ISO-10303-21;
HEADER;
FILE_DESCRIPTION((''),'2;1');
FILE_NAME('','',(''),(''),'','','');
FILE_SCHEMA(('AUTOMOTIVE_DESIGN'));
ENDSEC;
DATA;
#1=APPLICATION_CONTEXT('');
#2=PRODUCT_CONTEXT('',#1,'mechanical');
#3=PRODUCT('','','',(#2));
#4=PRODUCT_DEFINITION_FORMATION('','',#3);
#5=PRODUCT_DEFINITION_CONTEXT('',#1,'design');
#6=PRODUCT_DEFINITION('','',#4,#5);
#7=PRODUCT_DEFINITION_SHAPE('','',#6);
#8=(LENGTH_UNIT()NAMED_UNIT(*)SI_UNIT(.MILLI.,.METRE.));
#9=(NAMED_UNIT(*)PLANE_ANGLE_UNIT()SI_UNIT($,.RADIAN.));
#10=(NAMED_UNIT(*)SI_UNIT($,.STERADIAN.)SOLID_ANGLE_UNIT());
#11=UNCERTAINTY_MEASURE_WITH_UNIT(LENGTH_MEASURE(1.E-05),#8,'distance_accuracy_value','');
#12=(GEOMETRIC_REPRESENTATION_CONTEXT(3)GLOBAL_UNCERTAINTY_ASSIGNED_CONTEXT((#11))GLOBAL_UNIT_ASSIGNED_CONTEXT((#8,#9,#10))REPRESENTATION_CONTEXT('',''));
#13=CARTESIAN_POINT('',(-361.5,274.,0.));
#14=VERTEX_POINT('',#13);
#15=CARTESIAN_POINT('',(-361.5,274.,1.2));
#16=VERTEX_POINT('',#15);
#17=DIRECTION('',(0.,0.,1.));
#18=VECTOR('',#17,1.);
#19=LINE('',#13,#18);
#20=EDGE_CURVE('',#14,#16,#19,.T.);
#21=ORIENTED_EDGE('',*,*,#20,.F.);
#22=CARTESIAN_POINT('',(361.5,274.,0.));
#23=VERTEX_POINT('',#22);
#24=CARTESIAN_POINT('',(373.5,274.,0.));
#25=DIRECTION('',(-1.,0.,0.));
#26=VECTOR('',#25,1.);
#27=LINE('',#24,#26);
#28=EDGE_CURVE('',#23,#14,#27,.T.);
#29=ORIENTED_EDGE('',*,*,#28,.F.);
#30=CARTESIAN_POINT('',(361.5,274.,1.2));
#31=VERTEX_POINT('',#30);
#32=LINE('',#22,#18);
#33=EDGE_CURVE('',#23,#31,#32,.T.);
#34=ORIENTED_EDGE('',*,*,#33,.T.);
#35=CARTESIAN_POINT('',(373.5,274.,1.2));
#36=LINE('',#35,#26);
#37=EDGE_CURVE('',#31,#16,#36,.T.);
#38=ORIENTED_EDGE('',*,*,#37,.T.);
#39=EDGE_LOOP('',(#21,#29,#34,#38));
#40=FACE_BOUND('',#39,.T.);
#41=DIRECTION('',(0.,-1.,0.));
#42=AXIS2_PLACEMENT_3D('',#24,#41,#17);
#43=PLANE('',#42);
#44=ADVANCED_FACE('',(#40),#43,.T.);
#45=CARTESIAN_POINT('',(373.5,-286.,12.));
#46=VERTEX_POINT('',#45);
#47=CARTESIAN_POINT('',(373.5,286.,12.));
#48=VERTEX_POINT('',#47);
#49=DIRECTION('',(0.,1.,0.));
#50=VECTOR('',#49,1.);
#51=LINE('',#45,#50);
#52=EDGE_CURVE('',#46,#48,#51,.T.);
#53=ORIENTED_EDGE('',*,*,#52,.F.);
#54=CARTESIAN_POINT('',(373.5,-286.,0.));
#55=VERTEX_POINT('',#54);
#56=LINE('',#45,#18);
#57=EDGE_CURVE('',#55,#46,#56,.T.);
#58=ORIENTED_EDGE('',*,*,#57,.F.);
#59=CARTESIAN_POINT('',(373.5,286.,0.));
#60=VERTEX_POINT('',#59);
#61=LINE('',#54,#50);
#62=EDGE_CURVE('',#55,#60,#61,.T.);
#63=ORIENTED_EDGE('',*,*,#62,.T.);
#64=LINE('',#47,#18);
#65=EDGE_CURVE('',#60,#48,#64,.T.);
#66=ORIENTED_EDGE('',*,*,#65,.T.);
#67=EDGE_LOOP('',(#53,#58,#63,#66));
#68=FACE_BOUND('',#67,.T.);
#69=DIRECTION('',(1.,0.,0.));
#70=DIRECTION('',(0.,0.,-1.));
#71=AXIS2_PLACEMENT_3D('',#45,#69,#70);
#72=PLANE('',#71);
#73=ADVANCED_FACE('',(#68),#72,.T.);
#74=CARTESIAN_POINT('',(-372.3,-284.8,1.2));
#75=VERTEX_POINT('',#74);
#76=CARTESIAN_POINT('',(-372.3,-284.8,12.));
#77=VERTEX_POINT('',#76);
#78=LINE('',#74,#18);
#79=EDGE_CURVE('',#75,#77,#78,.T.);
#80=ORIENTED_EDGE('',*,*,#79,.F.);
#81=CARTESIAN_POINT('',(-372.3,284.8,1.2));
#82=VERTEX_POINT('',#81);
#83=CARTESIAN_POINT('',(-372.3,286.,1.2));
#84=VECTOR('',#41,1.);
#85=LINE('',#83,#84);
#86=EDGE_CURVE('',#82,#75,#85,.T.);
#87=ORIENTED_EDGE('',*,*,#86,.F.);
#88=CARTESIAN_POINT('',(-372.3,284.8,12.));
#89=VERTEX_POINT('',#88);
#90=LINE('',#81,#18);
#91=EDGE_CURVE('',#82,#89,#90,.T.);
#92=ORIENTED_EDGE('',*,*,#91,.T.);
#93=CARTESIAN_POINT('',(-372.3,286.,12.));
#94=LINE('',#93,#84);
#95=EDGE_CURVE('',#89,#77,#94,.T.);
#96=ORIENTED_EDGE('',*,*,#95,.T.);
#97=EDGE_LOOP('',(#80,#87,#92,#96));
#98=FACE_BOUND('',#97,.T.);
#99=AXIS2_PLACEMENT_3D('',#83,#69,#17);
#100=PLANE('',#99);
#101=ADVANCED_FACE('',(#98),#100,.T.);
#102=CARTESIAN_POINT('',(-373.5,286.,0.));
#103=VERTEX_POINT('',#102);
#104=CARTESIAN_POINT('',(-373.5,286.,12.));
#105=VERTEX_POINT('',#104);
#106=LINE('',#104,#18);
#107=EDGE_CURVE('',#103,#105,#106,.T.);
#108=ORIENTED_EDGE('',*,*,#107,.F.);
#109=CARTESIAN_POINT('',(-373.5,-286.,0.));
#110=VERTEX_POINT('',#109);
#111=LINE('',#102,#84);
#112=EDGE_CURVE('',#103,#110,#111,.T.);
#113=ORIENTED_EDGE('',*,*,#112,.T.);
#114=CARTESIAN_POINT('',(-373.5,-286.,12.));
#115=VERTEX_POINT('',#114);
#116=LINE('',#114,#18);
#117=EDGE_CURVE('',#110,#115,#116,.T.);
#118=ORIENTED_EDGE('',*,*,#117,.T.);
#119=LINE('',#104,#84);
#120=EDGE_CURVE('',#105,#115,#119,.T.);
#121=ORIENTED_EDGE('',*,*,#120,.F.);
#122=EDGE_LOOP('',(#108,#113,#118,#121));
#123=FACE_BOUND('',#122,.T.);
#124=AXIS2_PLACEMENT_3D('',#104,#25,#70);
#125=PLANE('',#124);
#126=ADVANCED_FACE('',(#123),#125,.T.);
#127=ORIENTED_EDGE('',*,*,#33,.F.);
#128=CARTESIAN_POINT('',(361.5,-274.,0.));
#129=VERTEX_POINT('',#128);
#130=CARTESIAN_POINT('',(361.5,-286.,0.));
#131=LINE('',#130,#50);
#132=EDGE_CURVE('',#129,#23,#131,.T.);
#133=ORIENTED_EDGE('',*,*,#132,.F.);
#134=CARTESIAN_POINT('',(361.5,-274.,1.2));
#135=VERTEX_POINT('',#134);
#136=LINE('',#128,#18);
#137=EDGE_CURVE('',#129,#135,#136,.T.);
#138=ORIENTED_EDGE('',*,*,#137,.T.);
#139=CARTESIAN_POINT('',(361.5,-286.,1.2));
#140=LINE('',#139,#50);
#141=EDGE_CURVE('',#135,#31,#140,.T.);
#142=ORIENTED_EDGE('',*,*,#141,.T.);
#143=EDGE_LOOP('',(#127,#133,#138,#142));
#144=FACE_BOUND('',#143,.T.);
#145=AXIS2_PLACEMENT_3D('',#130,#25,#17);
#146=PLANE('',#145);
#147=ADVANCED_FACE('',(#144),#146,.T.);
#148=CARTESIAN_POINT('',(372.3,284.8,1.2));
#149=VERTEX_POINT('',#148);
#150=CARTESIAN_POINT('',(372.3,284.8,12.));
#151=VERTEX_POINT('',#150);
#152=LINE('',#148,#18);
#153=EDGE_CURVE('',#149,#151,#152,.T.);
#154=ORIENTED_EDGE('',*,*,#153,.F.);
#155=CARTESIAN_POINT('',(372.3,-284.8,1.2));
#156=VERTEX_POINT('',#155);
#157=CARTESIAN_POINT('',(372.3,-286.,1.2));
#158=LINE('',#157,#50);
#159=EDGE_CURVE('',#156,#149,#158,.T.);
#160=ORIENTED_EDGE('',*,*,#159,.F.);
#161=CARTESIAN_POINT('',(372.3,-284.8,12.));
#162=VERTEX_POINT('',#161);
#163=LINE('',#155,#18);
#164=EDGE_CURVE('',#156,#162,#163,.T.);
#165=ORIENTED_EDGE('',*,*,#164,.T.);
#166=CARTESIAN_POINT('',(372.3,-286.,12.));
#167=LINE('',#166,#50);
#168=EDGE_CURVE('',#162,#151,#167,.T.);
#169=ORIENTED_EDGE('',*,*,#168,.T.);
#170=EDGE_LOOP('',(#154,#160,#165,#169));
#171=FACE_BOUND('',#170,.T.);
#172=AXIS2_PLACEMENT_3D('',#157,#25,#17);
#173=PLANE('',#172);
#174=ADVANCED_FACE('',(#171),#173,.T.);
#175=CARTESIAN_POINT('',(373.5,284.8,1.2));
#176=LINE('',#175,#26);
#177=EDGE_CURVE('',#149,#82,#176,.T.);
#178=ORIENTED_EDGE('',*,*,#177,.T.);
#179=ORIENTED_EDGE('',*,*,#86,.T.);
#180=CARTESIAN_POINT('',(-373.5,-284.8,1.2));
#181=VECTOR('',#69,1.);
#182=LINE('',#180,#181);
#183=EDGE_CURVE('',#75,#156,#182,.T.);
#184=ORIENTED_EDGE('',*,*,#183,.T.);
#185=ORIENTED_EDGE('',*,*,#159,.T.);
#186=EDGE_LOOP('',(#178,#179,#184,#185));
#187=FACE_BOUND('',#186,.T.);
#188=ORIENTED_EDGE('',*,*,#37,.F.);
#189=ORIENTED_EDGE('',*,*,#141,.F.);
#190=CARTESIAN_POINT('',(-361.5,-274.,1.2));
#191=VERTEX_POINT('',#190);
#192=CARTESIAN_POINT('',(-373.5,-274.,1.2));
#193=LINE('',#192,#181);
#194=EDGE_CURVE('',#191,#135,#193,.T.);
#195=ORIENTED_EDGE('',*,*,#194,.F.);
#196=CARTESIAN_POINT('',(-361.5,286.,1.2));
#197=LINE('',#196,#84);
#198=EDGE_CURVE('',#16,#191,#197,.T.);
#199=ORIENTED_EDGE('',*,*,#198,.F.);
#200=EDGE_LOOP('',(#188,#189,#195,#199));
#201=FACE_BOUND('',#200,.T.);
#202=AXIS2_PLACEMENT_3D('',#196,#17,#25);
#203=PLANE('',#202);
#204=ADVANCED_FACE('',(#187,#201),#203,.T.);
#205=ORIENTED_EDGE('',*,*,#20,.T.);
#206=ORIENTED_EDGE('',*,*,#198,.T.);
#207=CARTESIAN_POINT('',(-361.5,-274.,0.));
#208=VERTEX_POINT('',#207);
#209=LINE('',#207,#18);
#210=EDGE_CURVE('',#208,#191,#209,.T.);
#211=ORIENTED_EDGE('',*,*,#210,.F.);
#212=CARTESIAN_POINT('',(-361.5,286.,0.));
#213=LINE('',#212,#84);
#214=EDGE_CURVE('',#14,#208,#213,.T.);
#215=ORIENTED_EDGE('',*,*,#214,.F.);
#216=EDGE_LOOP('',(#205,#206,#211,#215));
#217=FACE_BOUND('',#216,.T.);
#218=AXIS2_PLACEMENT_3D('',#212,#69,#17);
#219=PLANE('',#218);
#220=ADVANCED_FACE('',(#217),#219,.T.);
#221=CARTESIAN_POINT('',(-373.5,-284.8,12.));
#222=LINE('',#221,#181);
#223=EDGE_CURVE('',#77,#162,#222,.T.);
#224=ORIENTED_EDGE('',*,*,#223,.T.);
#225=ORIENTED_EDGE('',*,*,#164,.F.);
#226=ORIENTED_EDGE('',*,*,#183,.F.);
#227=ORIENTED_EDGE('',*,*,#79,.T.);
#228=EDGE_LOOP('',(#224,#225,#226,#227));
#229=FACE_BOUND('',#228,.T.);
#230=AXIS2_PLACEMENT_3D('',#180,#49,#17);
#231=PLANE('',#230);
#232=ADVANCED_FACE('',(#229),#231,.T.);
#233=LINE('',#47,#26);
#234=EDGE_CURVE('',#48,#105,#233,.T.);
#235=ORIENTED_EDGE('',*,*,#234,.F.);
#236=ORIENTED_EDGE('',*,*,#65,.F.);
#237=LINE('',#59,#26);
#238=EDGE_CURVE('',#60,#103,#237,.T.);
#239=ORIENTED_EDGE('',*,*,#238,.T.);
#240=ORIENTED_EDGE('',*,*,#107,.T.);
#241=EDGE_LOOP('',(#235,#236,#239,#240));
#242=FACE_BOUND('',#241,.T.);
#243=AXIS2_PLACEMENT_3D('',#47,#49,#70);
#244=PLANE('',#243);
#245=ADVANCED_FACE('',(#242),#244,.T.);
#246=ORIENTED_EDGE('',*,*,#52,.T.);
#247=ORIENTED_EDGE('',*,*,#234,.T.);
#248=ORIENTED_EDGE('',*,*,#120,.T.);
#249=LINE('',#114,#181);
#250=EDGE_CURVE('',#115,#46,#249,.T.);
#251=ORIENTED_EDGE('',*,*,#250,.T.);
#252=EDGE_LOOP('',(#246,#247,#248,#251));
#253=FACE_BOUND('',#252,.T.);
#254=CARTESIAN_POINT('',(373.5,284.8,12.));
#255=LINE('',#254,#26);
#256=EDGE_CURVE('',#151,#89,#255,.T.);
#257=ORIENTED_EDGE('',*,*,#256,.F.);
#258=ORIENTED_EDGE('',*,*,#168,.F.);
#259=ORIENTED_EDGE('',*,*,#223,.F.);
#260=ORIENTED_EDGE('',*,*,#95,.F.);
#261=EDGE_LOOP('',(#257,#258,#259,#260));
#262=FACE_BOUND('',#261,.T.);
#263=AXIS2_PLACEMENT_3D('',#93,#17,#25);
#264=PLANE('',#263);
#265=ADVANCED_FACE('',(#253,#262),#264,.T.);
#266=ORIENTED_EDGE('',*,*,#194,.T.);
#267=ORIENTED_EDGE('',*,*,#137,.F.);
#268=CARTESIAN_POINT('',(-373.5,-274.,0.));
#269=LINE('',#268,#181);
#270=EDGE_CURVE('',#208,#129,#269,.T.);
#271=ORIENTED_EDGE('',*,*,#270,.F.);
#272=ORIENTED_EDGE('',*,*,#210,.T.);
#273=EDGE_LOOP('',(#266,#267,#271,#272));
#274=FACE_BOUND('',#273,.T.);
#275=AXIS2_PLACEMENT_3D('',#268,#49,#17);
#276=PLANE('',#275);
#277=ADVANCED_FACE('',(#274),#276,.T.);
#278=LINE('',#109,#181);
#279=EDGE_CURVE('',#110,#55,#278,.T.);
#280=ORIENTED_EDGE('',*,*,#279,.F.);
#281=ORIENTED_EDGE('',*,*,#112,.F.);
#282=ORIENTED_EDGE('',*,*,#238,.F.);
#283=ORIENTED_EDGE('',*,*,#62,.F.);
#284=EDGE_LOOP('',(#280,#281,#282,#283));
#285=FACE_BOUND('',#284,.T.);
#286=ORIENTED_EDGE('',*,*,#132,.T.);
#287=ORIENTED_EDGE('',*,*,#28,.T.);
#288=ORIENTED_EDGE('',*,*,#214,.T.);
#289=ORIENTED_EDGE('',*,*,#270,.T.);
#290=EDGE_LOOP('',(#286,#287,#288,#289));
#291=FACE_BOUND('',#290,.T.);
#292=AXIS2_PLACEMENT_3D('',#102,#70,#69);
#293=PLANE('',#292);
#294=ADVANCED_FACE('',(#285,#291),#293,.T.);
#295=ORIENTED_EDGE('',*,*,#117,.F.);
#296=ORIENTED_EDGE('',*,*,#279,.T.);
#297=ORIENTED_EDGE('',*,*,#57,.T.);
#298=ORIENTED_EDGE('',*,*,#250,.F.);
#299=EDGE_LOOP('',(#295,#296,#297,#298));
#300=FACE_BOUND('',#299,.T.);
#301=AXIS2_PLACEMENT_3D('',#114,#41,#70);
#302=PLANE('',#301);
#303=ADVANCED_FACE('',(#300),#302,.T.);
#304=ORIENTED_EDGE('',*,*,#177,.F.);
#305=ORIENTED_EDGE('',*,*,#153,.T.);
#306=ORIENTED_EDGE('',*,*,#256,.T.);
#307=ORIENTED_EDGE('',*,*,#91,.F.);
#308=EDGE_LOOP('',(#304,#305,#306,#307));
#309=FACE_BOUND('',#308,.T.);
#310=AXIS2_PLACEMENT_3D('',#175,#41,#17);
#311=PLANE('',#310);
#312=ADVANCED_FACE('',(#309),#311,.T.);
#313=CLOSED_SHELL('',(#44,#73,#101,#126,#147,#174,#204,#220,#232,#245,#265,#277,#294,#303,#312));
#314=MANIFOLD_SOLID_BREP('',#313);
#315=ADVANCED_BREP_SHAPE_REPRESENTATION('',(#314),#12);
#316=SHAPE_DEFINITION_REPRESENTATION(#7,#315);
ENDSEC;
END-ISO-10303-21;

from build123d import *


with BuildPart() as f2:
    # F2: sweep along a path in F0
    with BuildLine(Plane.XY) as f2_path:
        Line((-373.5, 286), (-373.5, -286))
        Line((-373.5, -286), (373.5, -286))
        Line((373.5, -286), (373.5, 286))
        Line((373.5, 286), (-373.5, 286))
    # F1 (on Front) → F2 (sweep)
    with BuildSketch(Plane.XZ):
        Polygon((-372.3, 12), (-373.5, 12), (-373.5, 0), (-361.5, 0), (-361.5, 1.2), (-372.3, 1.2), align=None)
    sweep(path=f2_path.line, transition=Transition.RIGHT)


solid = f2.part
